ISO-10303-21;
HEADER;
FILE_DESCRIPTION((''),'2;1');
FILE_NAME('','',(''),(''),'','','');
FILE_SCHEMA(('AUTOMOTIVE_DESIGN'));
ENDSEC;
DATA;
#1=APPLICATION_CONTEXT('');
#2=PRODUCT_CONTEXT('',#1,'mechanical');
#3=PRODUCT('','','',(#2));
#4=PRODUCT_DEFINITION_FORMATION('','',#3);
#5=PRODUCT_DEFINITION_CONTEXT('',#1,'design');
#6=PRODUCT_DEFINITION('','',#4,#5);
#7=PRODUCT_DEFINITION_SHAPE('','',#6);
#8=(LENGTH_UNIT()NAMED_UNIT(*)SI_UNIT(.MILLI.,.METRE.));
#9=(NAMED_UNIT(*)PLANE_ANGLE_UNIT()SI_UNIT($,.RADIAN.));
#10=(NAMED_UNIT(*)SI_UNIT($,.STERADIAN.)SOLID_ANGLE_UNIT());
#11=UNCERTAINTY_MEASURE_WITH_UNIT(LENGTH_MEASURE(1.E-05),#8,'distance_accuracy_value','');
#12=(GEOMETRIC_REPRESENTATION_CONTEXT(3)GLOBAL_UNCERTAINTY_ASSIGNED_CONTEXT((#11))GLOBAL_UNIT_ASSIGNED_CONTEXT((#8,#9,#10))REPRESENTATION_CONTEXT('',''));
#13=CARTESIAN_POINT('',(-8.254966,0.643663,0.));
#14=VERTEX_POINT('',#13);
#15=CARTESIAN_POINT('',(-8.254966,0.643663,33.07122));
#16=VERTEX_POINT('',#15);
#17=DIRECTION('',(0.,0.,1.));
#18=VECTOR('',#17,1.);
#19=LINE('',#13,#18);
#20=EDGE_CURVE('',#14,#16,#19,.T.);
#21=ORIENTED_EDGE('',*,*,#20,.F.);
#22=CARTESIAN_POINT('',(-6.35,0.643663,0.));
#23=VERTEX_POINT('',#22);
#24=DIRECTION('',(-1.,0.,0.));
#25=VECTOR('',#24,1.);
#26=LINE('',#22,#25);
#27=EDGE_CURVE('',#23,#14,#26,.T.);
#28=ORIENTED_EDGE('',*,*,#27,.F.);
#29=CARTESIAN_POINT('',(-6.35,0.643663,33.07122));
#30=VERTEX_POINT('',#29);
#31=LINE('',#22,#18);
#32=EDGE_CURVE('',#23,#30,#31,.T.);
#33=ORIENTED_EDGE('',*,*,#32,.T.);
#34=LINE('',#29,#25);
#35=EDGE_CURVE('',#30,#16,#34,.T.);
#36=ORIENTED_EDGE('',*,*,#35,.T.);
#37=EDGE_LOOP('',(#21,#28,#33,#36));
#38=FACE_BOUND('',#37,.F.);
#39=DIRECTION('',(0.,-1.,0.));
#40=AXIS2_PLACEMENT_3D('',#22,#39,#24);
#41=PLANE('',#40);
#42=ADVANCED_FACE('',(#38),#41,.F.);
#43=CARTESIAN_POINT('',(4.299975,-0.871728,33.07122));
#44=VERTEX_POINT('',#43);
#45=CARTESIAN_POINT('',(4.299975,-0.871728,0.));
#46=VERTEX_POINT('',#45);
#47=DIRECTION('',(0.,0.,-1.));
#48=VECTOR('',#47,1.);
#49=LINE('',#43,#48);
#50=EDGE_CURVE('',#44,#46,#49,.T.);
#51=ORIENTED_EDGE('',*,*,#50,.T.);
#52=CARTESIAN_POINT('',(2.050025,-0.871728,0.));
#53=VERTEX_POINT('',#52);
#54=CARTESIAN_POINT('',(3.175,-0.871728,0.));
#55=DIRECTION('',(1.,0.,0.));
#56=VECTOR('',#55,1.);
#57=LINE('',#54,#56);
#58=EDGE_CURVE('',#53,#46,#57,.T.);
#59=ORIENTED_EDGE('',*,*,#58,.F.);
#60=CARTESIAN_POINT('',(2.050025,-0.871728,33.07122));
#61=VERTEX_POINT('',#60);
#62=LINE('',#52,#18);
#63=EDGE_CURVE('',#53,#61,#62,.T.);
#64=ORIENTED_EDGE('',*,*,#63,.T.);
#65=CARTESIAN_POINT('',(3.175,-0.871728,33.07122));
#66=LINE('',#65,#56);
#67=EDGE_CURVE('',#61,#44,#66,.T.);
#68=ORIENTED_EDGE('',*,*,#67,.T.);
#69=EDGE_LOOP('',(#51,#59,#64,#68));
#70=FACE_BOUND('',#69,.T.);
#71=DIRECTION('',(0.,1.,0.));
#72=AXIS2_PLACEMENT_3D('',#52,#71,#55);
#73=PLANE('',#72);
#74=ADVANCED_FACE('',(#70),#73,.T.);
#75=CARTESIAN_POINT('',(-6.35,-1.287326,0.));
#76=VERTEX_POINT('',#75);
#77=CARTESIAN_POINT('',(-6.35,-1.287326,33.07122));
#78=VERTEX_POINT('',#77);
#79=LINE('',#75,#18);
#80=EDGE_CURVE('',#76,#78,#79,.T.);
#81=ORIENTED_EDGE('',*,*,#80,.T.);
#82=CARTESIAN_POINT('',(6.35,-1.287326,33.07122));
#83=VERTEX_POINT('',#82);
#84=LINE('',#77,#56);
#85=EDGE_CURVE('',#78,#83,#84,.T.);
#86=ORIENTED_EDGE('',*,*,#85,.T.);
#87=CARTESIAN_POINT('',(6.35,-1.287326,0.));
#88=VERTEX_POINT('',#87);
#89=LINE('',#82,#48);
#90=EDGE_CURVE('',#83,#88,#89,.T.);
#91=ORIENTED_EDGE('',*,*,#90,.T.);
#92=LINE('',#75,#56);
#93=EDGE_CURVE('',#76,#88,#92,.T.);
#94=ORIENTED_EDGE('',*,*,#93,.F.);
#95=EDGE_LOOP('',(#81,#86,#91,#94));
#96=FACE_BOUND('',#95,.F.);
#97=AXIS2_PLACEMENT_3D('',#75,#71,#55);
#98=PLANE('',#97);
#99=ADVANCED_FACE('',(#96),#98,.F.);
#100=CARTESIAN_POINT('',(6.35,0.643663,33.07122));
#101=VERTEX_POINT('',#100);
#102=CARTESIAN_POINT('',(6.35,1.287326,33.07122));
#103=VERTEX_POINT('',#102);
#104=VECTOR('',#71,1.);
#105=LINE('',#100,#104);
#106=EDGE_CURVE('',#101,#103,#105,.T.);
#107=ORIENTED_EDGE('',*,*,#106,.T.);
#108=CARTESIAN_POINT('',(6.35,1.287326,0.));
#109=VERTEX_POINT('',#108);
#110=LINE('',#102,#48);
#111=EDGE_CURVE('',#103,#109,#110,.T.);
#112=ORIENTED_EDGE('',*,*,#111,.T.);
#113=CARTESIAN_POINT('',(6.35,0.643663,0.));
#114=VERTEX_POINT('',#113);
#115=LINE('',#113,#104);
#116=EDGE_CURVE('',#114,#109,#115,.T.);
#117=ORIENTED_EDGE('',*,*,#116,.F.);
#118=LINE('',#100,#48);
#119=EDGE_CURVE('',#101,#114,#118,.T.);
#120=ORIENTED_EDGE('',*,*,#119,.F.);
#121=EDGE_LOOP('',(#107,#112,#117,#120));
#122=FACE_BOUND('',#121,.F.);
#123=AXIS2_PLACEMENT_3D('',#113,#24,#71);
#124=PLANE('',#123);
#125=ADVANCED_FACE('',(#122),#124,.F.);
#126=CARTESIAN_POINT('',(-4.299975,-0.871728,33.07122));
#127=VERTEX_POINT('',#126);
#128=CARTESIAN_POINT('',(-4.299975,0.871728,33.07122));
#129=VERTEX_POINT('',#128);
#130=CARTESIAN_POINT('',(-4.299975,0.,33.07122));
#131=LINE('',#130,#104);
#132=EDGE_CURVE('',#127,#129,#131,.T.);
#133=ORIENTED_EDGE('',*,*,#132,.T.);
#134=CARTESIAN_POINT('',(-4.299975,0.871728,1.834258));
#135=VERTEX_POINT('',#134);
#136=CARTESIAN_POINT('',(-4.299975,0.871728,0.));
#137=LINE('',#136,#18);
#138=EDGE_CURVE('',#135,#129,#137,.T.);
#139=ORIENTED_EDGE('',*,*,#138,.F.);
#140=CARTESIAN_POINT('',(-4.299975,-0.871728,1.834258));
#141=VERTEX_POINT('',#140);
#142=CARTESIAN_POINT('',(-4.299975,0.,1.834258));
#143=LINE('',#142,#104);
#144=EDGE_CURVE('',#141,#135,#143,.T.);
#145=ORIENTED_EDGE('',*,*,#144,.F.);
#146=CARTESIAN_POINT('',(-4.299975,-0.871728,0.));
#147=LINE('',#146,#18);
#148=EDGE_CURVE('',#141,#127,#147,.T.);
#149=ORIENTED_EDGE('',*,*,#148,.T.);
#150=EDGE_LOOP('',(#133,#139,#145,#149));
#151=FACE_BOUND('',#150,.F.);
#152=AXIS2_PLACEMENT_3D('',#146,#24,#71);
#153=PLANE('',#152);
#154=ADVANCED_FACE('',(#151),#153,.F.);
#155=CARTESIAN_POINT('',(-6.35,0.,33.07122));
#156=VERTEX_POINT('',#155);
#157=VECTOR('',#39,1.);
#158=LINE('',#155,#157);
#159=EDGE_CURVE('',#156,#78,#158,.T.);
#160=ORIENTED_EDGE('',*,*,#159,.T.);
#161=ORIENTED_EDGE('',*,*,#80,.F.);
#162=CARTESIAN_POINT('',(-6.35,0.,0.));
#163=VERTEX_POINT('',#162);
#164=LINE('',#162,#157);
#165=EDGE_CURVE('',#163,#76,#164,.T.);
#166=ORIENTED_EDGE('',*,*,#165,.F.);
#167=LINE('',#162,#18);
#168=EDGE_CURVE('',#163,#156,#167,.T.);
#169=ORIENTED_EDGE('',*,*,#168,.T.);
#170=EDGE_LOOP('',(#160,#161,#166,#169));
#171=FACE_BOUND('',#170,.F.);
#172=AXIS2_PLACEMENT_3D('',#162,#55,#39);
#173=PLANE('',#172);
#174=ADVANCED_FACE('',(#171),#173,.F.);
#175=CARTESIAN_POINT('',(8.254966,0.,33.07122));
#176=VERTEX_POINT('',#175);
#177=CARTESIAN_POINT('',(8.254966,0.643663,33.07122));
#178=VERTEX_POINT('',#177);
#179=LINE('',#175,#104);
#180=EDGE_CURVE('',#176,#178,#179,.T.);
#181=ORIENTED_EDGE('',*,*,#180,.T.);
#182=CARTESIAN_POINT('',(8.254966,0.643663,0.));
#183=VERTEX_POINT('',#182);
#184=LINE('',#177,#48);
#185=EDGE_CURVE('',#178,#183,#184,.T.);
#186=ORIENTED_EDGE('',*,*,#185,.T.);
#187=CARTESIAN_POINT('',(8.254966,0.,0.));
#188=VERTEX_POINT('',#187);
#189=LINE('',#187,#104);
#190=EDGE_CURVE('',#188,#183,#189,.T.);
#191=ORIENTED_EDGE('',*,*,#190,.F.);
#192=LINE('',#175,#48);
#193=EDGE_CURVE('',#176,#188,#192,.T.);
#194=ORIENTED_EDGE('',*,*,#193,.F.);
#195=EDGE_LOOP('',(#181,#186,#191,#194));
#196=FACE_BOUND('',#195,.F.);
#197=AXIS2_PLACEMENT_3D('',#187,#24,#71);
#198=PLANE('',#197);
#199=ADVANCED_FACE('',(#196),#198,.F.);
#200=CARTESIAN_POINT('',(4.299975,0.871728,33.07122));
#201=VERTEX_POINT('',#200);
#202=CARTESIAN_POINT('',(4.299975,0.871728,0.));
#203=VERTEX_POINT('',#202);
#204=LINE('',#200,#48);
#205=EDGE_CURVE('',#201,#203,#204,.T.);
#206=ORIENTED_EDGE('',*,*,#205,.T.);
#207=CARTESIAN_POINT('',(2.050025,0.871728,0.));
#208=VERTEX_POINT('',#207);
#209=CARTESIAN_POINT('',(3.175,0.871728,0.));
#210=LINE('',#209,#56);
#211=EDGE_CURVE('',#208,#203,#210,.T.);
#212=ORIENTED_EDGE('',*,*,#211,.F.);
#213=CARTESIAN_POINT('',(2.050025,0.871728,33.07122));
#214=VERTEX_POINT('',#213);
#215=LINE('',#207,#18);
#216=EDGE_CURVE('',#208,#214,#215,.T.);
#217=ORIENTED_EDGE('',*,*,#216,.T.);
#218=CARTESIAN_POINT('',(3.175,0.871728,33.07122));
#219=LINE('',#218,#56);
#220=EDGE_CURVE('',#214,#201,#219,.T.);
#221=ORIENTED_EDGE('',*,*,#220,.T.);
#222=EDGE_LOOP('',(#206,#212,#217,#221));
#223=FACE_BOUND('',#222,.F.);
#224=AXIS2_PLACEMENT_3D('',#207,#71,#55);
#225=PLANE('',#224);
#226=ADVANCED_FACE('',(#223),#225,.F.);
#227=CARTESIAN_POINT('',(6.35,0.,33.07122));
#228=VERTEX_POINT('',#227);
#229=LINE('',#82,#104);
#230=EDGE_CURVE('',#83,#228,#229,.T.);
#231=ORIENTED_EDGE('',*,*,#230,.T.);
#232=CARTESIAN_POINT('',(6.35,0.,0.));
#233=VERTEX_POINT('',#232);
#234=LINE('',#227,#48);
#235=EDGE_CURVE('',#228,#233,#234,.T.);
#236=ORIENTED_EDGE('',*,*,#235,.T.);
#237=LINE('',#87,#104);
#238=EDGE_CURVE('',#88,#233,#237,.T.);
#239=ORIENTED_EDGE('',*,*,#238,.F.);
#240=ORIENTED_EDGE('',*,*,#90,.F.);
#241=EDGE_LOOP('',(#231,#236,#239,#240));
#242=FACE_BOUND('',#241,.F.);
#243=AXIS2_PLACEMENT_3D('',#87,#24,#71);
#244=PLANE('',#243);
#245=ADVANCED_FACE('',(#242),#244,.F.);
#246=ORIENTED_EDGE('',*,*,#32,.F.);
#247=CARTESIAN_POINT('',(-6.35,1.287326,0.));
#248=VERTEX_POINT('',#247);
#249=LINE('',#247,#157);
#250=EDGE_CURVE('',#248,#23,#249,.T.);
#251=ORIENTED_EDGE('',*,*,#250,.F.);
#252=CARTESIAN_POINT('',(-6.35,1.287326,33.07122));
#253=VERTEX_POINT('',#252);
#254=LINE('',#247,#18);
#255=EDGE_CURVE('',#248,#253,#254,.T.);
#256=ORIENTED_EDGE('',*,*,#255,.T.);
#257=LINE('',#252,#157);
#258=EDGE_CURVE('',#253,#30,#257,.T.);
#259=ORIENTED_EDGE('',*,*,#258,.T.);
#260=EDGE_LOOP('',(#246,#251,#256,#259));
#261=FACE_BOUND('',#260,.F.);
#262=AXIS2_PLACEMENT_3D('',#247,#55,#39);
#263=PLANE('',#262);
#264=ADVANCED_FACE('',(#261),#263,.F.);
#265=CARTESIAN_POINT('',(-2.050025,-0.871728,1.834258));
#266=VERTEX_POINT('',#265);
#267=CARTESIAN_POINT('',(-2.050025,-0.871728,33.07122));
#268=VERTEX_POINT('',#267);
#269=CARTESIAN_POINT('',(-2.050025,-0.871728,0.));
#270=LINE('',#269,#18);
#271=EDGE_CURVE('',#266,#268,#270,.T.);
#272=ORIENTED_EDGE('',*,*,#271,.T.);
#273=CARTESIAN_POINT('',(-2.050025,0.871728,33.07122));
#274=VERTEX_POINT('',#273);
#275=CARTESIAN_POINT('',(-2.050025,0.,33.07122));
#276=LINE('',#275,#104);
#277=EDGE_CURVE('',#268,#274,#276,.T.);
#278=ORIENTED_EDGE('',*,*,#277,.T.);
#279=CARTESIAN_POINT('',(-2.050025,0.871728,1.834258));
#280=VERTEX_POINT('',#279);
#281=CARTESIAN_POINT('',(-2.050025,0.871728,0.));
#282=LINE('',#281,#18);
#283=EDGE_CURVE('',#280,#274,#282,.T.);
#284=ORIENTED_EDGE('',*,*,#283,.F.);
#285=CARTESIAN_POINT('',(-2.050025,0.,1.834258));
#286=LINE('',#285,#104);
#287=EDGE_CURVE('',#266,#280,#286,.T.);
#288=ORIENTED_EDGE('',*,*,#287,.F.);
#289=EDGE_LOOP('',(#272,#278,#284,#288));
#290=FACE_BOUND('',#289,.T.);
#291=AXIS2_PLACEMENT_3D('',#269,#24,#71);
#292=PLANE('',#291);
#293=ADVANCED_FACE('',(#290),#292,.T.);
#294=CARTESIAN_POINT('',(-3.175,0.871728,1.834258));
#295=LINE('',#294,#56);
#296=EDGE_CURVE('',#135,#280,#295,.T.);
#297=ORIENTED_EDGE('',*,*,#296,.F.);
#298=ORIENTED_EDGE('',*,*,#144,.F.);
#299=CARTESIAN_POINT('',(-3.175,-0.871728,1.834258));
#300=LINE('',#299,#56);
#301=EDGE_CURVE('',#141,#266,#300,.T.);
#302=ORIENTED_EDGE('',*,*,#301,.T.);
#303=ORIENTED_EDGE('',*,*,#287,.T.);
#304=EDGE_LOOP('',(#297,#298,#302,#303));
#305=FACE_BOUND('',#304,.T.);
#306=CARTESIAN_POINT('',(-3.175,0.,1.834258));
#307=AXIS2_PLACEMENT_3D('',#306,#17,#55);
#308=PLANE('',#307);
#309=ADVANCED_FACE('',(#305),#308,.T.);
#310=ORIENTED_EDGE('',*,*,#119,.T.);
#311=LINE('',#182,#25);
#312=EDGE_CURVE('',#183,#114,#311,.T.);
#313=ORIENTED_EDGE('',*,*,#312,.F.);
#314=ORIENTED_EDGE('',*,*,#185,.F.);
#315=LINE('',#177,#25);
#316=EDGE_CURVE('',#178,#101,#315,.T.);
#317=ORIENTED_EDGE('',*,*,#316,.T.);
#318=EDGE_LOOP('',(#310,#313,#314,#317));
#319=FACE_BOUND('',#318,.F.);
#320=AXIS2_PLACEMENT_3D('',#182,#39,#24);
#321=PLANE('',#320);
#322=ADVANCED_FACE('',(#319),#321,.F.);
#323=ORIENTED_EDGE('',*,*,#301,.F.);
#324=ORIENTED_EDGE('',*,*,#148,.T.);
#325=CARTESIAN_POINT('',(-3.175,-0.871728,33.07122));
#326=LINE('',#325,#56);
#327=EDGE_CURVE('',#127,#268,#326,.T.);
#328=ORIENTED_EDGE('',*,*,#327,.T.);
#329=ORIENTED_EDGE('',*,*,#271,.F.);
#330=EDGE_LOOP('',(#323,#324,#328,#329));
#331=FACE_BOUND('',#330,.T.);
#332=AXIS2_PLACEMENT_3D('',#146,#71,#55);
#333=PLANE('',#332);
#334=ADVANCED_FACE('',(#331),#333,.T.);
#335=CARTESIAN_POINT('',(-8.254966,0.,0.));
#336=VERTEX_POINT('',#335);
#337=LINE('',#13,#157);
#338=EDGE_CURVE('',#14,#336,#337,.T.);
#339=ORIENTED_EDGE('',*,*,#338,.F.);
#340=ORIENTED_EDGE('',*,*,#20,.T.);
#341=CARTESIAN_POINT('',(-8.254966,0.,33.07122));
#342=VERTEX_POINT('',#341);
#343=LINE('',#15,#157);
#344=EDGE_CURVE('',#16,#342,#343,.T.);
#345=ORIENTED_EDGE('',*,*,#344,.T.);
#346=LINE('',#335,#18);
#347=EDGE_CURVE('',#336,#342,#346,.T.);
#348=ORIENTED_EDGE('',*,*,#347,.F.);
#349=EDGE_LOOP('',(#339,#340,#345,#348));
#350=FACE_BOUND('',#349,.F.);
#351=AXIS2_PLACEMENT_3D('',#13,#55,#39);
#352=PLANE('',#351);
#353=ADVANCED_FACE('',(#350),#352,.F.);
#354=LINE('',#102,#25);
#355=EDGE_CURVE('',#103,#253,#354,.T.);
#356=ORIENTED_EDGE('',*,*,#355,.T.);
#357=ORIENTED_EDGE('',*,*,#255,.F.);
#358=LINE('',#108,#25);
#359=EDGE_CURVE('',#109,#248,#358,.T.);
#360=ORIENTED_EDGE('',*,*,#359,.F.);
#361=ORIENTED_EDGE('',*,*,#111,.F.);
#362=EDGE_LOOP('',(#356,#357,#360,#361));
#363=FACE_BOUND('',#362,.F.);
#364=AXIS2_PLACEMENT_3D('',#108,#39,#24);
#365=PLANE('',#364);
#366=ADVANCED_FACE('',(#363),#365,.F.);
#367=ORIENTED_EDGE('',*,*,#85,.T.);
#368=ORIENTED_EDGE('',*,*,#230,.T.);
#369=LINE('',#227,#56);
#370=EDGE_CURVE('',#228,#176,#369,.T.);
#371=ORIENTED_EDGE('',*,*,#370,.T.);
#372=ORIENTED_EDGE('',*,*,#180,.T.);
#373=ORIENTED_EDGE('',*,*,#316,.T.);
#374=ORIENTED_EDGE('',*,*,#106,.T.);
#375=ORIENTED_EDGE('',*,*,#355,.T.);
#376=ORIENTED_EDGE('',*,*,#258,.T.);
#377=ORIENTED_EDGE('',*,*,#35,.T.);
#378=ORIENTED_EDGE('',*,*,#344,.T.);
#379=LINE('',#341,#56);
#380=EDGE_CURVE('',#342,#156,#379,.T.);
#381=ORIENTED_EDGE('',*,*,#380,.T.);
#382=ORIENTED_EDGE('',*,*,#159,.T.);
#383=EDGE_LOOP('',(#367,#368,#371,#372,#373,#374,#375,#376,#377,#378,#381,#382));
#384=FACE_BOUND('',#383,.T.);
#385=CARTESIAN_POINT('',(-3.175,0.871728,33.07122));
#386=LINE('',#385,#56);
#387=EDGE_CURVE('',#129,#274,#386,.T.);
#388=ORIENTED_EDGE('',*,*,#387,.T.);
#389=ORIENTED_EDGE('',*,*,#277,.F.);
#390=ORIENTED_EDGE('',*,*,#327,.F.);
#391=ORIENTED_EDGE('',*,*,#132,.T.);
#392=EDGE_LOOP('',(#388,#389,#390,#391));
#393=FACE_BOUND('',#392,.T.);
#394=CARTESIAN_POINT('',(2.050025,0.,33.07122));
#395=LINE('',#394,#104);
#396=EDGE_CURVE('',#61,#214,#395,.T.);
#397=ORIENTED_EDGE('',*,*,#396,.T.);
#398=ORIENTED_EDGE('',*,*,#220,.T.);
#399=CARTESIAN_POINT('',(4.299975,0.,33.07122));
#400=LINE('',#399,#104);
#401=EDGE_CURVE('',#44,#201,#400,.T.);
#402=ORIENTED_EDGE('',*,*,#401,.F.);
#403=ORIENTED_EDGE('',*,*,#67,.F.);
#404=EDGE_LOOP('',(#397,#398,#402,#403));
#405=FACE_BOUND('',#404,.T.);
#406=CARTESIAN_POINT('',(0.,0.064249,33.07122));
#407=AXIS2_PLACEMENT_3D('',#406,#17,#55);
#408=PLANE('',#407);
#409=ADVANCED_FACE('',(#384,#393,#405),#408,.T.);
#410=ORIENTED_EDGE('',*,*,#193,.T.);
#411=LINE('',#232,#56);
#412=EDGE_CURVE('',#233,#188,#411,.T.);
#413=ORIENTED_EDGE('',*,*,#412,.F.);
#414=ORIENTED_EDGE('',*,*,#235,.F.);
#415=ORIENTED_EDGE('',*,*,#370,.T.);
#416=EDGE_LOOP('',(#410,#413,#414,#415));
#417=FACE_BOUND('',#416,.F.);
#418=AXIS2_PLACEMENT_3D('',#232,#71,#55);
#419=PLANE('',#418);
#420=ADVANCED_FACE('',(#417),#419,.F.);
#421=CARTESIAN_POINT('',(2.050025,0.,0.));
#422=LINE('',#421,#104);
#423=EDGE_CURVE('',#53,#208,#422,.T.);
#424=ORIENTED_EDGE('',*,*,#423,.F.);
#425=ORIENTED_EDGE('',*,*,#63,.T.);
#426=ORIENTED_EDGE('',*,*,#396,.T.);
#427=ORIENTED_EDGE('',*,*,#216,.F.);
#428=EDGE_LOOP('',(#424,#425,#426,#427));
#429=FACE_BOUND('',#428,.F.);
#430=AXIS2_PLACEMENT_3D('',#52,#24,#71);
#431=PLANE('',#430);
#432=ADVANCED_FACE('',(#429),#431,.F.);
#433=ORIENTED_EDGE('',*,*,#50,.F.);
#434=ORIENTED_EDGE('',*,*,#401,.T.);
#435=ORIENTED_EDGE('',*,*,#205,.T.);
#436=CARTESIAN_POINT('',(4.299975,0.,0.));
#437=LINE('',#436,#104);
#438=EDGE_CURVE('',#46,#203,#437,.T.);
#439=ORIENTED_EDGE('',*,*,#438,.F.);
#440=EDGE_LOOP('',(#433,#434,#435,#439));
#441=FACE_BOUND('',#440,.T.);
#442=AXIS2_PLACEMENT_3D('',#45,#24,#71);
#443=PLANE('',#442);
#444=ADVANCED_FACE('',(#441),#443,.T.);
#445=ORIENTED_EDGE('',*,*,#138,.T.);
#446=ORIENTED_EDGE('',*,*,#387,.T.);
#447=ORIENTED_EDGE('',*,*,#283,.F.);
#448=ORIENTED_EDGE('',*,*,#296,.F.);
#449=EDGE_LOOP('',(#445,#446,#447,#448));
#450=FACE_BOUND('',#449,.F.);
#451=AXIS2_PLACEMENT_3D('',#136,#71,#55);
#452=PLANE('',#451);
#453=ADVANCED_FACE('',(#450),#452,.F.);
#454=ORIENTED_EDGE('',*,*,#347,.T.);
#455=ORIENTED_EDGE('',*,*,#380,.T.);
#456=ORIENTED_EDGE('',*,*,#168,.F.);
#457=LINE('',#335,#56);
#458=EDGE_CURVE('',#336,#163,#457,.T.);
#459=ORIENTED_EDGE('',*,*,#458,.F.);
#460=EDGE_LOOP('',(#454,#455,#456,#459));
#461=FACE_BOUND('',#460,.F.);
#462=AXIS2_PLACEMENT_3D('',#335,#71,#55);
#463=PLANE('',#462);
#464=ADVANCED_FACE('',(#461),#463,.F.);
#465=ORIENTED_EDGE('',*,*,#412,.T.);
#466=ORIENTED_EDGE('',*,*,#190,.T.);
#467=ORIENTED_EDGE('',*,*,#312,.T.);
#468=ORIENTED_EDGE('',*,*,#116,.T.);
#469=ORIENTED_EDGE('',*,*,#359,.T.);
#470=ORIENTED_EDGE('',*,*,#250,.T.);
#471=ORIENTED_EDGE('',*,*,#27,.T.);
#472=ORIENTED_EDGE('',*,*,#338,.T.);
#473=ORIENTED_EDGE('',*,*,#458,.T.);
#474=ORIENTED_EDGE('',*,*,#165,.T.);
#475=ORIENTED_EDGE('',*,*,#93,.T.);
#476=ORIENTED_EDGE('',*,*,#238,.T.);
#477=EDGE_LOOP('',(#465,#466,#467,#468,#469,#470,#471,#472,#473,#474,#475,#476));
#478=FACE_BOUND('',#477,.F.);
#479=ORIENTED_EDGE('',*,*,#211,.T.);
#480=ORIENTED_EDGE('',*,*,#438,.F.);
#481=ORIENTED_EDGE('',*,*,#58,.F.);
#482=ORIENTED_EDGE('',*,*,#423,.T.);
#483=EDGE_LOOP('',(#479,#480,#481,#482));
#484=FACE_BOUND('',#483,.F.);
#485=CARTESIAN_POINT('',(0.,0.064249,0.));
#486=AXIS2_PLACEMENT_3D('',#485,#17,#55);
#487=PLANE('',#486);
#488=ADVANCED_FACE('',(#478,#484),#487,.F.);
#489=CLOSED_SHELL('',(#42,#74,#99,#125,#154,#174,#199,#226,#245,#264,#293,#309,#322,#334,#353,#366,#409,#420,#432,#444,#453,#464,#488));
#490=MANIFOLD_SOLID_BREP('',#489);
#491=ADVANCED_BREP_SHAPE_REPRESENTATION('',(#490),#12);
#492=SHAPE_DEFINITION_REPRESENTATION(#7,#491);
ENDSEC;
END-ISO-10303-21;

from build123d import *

# Parameters (mm, degrees)
F0_W     = 2.2499504322
F0_H     = 1.7434554408
F1_DEPTH = 1.1348915286
F3_DEPTH = 1.8342579715
F4_DEPTH = 33.0712201539


# Not quite as in the source:
# - the program builds the solid bodies; features that only make, move or delete a surface that nothing else refers to are left out


with BuildPart() as f1:
    # F0 (on Top) → F1 (new body)
    with BuildSketch(Plane.XY):
        Polygon((6.35, 1.2873262627), (-6.35, 1.2873262627), (-6.35, 0.6436631313), (-8.2549656289, 0.6436631313), (-8.2549656289, 0), (-6.35, 0), (-6.35, -1.2873262627), (6.35, -1.2873262627), (6.35, 0), (8.2549656289, 0), (8.2549656289, 0.6436631313), (6.35, 0.6436631313), align=None)
        with Locations((3.175, 0)):
            Rectangle(F0_W, F0_H, mode=Mode.SUBTRACT)
        with Locations((-3.175, 0)):
            Rectangle(F0_W, F0_H, mode=Mode.SUBTRACT)
    extrude(amount=F1_DEPTH)

    # F0 (on Top) → F3 (join)
    with BuildSketch(Plane.XY):
        with Locations((-3.175, 0)):
            Rectangle(F0_W, F0_H)
    extrude(amount=F3_DEPTH)

    # F0 (on Top) → F4 (join)
    with BuildSketch(Plane.XY):
        Polygon((6.35, 1.2873262627), (-6.35, 1.2873262627), (-6.35, 0.6436631313), (-8.2549656289, 0.6436631313), (-8.2549656289, 0), (-6.35, 0), (-6.35, -1.2873262627), (6.35, -1.2873262627), (6.35, 0), (8.2549656289, 0), (8.2549656289, 0.6436631313), (6.35, 0.6436631313), align=None)
        with Locations((3.175, 0)):
            Rectangle(F0_W, F0_H, mode=Mode.SUBTRACT)
        with Locations((-3.175, 0)):
            Rectangle(F0_W, F0_H, mode=Mode.SUBTRACT)
    extrude(amount=F4_DEPTH)


solid = f1.part
